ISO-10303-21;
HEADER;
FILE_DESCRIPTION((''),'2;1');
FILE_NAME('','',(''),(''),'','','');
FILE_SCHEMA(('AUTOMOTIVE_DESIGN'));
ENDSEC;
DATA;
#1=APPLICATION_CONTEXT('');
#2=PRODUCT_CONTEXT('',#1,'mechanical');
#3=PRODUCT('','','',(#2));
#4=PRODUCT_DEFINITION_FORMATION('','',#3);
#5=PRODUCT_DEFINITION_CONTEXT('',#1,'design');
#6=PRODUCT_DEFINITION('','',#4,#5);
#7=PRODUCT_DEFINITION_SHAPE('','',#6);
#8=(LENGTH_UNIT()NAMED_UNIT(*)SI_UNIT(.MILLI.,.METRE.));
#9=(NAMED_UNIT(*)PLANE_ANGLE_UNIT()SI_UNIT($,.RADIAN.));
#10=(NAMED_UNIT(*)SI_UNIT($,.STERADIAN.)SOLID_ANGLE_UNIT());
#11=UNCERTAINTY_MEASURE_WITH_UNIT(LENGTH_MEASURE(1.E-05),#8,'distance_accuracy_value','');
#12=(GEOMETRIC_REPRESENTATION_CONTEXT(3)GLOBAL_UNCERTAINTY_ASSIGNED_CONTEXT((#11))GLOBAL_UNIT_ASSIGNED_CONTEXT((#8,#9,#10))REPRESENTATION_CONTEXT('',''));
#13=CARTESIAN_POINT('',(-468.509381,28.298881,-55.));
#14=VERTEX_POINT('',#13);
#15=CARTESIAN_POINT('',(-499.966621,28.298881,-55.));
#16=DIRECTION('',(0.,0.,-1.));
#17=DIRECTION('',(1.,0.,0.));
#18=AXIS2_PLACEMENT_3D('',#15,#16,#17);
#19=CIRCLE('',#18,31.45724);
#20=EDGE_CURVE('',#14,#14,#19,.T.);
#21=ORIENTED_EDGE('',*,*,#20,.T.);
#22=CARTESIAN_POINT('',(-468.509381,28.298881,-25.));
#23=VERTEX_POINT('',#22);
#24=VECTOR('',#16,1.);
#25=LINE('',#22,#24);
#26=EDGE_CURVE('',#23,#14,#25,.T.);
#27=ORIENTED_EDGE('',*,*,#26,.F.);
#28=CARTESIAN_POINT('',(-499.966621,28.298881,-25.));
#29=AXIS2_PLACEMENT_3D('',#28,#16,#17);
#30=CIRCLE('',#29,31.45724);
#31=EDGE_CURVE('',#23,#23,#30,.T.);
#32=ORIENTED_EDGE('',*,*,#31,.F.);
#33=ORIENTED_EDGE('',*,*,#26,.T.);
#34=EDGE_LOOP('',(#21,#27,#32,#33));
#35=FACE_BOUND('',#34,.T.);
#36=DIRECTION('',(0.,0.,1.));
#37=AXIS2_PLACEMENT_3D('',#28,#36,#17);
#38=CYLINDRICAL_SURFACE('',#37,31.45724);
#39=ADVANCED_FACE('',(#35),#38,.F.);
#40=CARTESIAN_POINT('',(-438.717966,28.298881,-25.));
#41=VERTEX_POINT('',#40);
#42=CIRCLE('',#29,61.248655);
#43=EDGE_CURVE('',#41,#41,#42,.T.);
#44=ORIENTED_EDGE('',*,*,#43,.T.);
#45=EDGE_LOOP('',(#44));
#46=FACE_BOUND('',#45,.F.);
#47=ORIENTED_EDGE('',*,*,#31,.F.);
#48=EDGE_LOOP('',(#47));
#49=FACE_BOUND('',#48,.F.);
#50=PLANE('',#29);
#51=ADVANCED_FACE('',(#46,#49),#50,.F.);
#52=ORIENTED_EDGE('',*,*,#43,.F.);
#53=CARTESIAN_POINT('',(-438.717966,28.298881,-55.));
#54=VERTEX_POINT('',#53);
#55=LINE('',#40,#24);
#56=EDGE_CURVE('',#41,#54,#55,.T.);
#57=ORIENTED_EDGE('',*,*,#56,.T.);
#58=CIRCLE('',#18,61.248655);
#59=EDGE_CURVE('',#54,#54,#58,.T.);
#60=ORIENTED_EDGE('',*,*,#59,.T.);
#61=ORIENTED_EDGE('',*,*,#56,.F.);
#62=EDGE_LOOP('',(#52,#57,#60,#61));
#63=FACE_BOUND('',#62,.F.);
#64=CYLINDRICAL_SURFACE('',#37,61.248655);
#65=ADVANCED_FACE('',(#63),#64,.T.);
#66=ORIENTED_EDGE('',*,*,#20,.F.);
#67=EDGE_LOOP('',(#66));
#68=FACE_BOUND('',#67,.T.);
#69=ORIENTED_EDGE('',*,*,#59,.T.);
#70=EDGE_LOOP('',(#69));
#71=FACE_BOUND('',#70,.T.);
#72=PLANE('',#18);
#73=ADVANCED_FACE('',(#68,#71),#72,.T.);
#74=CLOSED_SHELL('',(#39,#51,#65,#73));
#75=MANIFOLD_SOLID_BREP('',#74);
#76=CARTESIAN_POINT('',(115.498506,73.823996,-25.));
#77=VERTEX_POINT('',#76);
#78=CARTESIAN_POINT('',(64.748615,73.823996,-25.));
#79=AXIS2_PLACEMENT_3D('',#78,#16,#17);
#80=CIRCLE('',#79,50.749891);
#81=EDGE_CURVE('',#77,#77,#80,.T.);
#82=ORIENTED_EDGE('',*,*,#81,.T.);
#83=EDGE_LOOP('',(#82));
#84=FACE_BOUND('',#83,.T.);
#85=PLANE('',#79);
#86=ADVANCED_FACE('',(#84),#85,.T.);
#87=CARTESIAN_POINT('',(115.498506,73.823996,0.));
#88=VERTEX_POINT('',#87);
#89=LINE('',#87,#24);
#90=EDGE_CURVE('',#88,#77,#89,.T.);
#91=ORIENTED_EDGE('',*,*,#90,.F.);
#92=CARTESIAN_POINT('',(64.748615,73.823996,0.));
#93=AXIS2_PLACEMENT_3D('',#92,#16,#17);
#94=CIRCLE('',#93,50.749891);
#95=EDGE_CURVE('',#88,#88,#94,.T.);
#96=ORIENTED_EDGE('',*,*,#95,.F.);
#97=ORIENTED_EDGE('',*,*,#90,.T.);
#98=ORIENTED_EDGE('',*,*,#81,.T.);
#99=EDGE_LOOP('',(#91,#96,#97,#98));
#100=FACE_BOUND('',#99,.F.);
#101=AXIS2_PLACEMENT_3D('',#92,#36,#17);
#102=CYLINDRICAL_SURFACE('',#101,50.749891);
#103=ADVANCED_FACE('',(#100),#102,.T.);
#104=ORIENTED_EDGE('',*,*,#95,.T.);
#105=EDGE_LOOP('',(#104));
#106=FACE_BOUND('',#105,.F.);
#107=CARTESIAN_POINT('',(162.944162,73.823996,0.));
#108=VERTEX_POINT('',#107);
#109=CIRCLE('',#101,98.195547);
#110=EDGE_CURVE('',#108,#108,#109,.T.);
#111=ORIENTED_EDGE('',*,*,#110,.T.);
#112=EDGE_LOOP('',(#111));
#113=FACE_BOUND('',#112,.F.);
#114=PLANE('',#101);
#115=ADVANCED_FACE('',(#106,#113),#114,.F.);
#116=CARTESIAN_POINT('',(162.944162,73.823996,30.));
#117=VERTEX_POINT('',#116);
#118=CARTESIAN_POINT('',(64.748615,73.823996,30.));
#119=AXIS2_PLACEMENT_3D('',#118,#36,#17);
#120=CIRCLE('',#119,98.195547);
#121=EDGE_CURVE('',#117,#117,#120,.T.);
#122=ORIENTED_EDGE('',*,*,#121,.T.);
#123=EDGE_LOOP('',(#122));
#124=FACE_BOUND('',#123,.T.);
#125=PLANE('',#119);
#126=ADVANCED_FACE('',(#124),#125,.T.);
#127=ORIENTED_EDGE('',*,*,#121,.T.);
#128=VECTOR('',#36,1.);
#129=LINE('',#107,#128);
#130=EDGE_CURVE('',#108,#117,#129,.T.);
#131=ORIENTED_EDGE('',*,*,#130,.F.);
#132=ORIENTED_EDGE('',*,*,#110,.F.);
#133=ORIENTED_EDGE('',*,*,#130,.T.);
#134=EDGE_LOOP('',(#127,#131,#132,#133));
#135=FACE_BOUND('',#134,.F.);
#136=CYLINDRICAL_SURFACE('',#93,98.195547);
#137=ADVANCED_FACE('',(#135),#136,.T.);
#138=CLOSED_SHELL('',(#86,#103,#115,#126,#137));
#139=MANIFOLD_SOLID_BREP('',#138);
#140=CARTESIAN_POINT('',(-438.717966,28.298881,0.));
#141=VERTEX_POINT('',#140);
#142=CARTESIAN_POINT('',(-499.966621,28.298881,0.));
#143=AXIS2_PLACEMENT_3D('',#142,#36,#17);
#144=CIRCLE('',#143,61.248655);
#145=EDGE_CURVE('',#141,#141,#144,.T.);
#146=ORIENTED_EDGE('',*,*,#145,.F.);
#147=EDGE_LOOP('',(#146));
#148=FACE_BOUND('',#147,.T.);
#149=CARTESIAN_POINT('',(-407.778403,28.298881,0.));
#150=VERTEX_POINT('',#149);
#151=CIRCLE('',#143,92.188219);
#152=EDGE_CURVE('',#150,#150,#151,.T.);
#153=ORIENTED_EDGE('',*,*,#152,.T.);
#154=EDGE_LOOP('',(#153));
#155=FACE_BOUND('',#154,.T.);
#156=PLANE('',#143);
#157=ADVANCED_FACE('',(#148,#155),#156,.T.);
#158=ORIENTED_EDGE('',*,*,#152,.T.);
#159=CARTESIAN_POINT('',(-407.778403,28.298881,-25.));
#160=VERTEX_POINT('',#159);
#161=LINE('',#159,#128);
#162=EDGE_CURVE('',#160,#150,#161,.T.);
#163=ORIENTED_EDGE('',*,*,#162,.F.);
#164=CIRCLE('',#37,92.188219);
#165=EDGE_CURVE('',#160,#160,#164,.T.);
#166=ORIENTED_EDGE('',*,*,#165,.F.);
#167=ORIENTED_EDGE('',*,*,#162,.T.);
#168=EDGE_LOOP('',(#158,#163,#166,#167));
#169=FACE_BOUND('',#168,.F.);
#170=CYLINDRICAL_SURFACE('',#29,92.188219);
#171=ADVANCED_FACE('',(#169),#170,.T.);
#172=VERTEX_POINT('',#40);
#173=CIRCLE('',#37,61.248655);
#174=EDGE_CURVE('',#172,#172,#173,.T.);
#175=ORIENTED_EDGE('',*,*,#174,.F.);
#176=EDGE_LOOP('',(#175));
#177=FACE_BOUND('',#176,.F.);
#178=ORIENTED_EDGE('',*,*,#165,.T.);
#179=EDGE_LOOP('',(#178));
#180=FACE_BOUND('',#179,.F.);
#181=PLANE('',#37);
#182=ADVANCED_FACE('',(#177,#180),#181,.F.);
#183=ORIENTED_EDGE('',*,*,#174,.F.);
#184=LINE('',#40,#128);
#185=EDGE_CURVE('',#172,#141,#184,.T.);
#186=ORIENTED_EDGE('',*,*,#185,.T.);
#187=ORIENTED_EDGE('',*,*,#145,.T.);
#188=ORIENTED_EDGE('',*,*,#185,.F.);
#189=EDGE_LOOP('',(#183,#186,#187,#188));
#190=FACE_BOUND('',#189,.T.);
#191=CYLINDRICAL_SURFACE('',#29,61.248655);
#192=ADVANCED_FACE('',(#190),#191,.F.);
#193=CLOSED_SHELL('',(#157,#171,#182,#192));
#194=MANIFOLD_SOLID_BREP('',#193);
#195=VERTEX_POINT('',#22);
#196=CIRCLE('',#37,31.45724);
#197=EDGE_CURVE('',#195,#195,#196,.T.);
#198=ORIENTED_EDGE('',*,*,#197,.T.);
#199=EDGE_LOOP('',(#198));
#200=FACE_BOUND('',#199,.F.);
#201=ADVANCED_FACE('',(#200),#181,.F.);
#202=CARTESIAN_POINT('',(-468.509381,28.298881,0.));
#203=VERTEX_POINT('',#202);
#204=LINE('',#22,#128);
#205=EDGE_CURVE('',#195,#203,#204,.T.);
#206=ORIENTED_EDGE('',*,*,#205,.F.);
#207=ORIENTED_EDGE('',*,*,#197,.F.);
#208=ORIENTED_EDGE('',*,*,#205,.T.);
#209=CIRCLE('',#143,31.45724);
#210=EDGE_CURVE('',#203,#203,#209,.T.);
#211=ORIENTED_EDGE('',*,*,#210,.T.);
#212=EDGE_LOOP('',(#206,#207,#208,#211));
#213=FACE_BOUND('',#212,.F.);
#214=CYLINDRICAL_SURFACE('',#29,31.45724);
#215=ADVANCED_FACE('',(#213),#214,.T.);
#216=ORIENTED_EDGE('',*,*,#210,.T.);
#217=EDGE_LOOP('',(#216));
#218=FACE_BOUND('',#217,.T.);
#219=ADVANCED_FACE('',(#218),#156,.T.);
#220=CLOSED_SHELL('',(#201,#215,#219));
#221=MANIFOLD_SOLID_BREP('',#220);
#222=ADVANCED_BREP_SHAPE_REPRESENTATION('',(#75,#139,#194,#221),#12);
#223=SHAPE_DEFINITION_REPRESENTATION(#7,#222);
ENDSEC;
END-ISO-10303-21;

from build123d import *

# Parameters (mm, degrees)
F0_R     = 98.1955473367
F0_R_2   = 40.2352449295
F1_DEPTH = 30
F2_R     = 50.749891167
F3_DEPTH = 25
F4_R     = 61.2486550409
F4_R_2   = 31.4572402961
F5_DEPTH = 30
F6_R     = 92.1882185635
F6_R_2   = 61.2486550409
F7_DEPTH = 25
F6_R_3   = 31.4572402961


with BuildPart() as f1:
    # F0 (on Top) → F1 (new body)
    with BuildSketch(Plane.XY):
        with Locations((64.7486150265, 73.8239958882)):
            Circle(F0_R)
        with Locations((49.9009788036, 57.3229975998)):
            Circle(F0_R_2, mode=Mode.SUBTRACT)
        with Locations((49.9009788036, 57.3229975998)):
            Circle(F0_R_2)
    extrude(amount=F1_DEPTH)

    # F2 (on face) → F3 (join)
    with BuildSketch(Plane(origin=(0, 0, 0), x_dir=(1, 0, 0), z_dir=(0, 0, -1))):
        with Locations((64.7486150265, -73.8239958882)):
            Circle(F2_R)
    extrude(amount=F3_DEPTH)


with BuildPart() as f5:
    # F4 (on face) → F5 (new body)
    with BuildSketch(Plane(origin=(0, 0, -25), x_dir=(1, 0, 0), z_dir=(0, 0, -1))):
        with Locations((-499.9666213989, -28.2988809049)):
            Circle(F4_R)
        with Locations((-499.9666213989, -28.2988809049)):
            Circle(F4_R_2, mode=Mode.SUBTRACT)
    extrude(amount=F5_DEPTH)


with BuildPart() as f7:
    # F6 (on face) → F7 (new body)
    with BuildSketch(Plane.XY.offset(-25)):
        with Locations((-499.9666213989, 28.2988809049)):
            Circle(F6_R)
        with Locations((-499.9666213989, 28.2988809049)):
            Circle(F6_R_2, mode=Mode.SUBTRACT)
    extrude(amount=F7_DEPTH)


with BuildPart() as f7b:
    # F6 (on face) → F7, piece 2 (new body)
    with BuildSketch(Plane.XY.offset(-25)):
        with Locations((-499.9666213989, 28.2988809049)):
            Circle(F6_R_3)
    extrude(amount=F7_DEPTH)


solid = Compound([f1.part, f5.part, f7.part, f7b.part])
